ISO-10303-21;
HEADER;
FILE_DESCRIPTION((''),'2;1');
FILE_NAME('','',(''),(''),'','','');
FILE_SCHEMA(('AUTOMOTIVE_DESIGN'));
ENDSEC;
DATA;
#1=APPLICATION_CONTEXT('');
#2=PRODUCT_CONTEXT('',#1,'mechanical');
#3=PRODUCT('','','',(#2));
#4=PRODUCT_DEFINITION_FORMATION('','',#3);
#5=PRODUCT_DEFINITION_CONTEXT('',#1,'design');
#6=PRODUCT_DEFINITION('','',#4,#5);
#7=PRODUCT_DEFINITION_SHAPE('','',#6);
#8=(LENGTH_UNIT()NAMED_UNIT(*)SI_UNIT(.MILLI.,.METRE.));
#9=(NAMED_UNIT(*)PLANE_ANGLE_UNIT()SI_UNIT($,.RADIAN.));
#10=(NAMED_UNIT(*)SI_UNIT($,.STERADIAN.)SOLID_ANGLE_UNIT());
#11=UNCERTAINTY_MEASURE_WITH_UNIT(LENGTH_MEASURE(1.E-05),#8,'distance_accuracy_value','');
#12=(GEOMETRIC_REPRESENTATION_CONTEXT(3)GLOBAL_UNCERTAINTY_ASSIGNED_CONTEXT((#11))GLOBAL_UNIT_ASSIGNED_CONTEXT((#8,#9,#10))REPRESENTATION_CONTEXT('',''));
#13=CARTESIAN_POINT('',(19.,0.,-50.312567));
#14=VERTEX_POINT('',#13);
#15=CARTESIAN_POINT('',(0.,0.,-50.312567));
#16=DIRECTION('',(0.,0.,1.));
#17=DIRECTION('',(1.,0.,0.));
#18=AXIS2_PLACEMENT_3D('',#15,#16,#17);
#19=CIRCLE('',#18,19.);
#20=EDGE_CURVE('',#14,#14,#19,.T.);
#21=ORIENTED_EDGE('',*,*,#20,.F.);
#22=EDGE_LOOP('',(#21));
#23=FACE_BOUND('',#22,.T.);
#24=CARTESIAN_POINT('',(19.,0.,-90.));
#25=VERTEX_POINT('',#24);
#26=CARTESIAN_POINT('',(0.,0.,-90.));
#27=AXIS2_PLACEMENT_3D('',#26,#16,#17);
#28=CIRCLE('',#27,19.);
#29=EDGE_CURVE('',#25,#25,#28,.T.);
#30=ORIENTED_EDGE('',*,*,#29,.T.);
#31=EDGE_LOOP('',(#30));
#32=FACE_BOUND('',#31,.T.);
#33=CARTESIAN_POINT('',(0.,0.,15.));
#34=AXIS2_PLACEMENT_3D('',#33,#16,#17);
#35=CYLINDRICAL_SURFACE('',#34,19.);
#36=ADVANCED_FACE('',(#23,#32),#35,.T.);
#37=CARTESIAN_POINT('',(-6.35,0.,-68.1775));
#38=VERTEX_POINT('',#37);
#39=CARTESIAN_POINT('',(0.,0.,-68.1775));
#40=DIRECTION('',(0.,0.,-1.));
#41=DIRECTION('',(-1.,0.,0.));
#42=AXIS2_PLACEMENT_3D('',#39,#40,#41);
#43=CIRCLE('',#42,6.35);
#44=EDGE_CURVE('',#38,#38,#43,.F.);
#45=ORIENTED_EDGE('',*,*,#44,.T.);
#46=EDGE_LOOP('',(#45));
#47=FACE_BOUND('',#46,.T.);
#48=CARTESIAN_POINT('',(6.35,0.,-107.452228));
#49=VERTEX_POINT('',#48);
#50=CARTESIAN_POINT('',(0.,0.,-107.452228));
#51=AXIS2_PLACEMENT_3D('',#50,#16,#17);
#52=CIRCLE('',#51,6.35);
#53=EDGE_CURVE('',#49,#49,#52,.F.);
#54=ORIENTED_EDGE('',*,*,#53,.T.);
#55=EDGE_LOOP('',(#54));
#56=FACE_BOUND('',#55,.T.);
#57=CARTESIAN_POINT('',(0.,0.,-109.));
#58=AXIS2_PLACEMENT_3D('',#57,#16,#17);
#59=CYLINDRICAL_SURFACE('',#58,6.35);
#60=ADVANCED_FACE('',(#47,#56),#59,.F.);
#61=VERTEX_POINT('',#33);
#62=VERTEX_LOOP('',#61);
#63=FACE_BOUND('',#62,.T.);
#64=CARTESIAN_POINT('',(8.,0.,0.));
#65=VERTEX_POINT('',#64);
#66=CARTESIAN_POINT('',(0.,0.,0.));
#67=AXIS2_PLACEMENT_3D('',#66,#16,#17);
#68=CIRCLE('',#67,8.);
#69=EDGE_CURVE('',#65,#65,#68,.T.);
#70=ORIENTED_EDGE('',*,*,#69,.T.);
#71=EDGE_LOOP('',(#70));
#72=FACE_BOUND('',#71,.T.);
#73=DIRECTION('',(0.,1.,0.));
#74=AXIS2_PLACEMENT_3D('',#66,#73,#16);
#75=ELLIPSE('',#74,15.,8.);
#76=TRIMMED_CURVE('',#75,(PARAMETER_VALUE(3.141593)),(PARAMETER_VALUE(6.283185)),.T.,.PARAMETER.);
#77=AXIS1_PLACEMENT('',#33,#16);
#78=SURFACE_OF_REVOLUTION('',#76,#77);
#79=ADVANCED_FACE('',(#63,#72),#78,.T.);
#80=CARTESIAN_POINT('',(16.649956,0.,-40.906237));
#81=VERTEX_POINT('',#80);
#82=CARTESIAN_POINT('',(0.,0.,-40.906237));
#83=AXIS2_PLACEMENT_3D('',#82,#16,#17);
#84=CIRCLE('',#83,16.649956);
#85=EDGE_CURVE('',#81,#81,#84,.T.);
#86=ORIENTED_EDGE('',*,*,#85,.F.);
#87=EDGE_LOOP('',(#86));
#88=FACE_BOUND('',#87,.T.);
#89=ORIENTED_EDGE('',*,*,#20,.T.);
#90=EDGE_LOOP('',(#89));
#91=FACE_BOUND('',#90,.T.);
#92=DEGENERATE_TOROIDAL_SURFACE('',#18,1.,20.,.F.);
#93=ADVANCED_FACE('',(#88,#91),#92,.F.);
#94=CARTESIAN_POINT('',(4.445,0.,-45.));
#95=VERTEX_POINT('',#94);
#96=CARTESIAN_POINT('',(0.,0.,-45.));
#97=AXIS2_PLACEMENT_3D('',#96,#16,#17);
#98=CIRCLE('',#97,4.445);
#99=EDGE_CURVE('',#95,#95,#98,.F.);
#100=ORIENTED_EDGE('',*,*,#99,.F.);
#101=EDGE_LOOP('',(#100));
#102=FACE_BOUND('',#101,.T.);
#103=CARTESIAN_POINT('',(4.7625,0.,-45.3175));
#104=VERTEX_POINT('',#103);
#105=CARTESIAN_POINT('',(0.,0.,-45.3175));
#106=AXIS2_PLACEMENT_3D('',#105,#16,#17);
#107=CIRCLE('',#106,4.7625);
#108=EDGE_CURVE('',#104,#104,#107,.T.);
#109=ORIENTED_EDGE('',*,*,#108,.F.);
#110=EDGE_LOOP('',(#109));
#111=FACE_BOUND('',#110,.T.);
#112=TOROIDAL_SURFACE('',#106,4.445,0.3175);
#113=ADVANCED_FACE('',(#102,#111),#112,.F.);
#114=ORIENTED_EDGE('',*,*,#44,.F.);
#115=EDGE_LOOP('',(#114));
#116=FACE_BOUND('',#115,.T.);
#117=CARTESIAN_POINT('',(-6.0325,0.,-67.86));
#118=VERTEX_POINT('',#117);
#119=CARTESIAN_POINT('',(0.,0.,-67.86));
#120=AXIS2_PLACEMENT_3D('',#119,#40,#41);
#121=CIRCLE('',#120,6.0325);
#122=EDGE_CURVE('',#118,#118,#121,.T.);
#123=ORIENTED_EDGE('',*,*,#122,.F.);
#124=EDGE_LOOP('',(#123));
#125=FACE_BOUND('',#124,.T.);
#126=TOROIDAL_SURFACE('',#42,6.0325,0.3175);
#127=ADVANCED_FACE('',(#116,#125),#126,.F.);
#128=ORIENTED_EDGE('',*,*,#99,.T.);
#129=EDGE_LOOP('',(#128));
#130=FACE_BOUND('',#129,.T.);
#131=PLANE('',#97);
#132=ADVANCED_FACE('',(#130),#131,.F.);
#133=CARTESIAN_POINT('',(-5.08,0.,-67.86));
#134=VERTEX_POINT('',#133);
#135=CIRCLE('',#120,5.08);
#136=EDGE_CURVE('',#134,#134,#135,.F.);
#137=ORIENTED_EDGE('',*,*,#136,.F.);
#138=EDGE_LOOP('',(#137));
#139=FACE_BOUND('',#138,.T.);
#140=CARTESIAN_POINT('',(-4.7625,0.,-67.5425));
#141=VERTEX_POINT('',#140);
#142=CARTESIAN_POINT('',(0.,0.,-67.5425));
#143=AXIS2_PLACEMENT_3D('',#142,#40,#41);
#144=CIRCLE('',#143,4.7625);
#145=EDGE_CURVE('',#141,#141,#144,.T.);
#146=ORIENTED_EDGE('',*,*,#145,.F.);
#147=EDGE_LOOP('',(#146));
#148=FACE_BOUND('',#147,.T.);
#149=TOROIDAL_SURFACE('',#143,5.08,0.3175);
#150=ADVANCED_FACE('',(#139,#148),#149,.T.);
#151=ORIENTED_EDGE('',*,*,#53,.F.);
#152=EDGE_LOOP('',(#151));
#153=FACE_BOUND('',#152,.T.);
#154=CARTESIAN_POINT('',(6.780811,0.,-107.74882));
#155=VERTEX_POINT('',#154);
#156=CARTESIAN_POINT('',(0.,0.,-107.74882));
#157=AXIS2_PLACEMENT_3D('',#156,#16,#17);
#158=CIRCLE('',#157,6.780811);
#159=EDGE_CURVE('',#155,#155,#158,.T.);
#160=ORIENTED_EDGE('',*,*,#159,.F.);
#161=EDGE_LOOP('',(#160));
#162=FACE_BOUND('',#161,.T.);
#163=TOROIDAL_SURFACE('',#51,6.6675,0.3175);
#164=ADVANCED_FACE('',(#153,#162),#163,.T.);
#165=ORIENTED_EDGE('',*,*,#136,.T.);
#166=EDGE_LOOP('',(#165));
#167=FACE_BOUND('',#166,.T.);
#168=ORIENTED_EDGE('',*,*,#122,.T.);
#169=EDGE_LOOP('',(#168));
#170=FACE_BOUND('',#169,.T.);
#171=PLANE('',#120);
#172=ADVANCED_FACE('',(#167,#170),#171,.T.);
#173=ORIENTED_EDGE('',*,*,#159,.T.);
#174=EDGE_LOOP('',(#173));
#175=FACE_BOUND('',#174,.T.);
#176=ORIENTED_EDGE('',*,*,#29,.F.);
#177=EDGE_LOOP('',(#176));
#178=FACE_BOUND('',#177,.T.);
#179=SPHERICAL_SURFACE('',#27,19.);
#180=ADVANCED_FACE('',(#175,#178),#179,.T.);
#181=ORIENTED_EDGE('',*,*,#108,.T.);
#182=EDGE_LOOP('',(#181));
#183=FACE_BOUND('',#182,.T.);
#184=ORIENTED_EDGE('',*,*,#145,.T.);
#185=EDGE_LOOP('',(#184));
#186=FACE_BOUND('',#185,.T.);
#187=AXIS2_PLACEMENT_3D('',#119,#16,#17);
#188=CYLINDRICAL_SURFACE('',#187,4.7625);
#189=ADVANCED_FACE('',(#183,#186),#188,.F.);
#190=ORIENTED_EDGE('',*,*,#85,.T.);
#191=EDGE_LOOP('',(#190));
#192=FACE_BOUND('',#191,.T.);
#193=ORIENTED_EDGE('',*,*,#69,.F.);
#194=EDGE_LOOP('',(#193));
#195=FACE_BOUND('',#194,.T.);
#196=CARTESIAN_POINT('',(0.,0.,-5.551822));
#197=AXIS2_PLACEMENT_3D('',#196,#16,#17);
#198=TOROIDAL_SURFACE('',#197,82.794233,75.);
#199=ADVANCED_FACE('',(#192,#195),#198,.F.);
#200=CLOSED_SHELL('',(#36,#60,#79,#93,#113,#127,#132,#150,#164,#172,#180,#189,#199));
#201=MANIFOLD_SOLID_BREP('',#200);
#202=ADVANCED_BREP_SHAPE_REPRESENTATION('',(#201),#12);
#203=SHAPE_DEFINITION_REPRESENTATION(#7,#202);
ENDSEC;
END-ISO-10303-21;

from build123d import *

# Parameters (mm, degrees)
CUT_EXTRUDE2_START  = -45
SKETCH2_R           = 6.35
CUT_EXTRUDE2_DEPTH  = 68.263083904
SKETCH6_R           = 6.35
SKETCH6_R_2         = 4.7625
BOSS_EXTRUDE3_DEPTH = 22.86
FILLET2_R           = 0.3175


with BuildPart() as part:
    # Sketch1 → Revolve1 (revolve)
    with BuildSketch(Plane(origin=(0, 0, 0), x_dir=(0, 0, -1), z_dir=(0, 1, 0))):
        with BuildLine():
            Line((-15, 0), (109, 0))
            ThreePointArc((109, 0), (103.435028843, 13.435028843), (90, 19))
            Line((90, 19), (50.312566576, 19))
            ThreePointArc((50.312566576, 19), (45.46484169, 18.403596662), (40.906236735, 16.649956343))
            ThreePointArc((40.906236735, 16.649956343), (21.06807377, 9.416811899), (0, 8))
            add(Edge.make_bspline(
                [(0, 8), (-15, 8), (-15, 0)],
                knots=[4.71238898, 4.71238898, 4.71238898, 6.283185307, 6.283185307, 6.283185307], degree=2, weights=[1, 0.707106781, 1]))
        make_face()
    revolve(axis=Axis((0, 0, 15), (0, 0, -1)))

    # Sketch2 → Cut-Extrude2 (cut, through all)
    with BuildSketch(Plane.XY.offset(CUT_EXTRUDE2_START)):
        Circle(SKETCH2_R)
    extrude(amount=-CUT_EXTRUDE2_DEPTH, mode=Mode.SUBTRACT)

    # Sketch6 → Boss-Extrude3 (add)
    with BuildSketch(Plane(origin=(0, 0, -45), x_dir=(-1, 0, 0), z_dir=(0, 0, -1))):
        Circle(SKETCH6_R)
        Circle(SKETCH6_R_2, mode=Mode.SUBTRACT)
    extrude(amount=BOSS_EXTRUDE3_DEPTH)

    # Fillet2
    fillet2_edges = [part.edges().sort_by_distance(p)[0] for p in [
        (0, -6.35, -107.907470508),
        (-6.35, 0, -67.86),
        (4.7625, 0, -67.86),
        (4.7625, 0, -45),
    ]]
    fillet(fillet2_edges, radius=FILLET2_R)


solid = part.part
